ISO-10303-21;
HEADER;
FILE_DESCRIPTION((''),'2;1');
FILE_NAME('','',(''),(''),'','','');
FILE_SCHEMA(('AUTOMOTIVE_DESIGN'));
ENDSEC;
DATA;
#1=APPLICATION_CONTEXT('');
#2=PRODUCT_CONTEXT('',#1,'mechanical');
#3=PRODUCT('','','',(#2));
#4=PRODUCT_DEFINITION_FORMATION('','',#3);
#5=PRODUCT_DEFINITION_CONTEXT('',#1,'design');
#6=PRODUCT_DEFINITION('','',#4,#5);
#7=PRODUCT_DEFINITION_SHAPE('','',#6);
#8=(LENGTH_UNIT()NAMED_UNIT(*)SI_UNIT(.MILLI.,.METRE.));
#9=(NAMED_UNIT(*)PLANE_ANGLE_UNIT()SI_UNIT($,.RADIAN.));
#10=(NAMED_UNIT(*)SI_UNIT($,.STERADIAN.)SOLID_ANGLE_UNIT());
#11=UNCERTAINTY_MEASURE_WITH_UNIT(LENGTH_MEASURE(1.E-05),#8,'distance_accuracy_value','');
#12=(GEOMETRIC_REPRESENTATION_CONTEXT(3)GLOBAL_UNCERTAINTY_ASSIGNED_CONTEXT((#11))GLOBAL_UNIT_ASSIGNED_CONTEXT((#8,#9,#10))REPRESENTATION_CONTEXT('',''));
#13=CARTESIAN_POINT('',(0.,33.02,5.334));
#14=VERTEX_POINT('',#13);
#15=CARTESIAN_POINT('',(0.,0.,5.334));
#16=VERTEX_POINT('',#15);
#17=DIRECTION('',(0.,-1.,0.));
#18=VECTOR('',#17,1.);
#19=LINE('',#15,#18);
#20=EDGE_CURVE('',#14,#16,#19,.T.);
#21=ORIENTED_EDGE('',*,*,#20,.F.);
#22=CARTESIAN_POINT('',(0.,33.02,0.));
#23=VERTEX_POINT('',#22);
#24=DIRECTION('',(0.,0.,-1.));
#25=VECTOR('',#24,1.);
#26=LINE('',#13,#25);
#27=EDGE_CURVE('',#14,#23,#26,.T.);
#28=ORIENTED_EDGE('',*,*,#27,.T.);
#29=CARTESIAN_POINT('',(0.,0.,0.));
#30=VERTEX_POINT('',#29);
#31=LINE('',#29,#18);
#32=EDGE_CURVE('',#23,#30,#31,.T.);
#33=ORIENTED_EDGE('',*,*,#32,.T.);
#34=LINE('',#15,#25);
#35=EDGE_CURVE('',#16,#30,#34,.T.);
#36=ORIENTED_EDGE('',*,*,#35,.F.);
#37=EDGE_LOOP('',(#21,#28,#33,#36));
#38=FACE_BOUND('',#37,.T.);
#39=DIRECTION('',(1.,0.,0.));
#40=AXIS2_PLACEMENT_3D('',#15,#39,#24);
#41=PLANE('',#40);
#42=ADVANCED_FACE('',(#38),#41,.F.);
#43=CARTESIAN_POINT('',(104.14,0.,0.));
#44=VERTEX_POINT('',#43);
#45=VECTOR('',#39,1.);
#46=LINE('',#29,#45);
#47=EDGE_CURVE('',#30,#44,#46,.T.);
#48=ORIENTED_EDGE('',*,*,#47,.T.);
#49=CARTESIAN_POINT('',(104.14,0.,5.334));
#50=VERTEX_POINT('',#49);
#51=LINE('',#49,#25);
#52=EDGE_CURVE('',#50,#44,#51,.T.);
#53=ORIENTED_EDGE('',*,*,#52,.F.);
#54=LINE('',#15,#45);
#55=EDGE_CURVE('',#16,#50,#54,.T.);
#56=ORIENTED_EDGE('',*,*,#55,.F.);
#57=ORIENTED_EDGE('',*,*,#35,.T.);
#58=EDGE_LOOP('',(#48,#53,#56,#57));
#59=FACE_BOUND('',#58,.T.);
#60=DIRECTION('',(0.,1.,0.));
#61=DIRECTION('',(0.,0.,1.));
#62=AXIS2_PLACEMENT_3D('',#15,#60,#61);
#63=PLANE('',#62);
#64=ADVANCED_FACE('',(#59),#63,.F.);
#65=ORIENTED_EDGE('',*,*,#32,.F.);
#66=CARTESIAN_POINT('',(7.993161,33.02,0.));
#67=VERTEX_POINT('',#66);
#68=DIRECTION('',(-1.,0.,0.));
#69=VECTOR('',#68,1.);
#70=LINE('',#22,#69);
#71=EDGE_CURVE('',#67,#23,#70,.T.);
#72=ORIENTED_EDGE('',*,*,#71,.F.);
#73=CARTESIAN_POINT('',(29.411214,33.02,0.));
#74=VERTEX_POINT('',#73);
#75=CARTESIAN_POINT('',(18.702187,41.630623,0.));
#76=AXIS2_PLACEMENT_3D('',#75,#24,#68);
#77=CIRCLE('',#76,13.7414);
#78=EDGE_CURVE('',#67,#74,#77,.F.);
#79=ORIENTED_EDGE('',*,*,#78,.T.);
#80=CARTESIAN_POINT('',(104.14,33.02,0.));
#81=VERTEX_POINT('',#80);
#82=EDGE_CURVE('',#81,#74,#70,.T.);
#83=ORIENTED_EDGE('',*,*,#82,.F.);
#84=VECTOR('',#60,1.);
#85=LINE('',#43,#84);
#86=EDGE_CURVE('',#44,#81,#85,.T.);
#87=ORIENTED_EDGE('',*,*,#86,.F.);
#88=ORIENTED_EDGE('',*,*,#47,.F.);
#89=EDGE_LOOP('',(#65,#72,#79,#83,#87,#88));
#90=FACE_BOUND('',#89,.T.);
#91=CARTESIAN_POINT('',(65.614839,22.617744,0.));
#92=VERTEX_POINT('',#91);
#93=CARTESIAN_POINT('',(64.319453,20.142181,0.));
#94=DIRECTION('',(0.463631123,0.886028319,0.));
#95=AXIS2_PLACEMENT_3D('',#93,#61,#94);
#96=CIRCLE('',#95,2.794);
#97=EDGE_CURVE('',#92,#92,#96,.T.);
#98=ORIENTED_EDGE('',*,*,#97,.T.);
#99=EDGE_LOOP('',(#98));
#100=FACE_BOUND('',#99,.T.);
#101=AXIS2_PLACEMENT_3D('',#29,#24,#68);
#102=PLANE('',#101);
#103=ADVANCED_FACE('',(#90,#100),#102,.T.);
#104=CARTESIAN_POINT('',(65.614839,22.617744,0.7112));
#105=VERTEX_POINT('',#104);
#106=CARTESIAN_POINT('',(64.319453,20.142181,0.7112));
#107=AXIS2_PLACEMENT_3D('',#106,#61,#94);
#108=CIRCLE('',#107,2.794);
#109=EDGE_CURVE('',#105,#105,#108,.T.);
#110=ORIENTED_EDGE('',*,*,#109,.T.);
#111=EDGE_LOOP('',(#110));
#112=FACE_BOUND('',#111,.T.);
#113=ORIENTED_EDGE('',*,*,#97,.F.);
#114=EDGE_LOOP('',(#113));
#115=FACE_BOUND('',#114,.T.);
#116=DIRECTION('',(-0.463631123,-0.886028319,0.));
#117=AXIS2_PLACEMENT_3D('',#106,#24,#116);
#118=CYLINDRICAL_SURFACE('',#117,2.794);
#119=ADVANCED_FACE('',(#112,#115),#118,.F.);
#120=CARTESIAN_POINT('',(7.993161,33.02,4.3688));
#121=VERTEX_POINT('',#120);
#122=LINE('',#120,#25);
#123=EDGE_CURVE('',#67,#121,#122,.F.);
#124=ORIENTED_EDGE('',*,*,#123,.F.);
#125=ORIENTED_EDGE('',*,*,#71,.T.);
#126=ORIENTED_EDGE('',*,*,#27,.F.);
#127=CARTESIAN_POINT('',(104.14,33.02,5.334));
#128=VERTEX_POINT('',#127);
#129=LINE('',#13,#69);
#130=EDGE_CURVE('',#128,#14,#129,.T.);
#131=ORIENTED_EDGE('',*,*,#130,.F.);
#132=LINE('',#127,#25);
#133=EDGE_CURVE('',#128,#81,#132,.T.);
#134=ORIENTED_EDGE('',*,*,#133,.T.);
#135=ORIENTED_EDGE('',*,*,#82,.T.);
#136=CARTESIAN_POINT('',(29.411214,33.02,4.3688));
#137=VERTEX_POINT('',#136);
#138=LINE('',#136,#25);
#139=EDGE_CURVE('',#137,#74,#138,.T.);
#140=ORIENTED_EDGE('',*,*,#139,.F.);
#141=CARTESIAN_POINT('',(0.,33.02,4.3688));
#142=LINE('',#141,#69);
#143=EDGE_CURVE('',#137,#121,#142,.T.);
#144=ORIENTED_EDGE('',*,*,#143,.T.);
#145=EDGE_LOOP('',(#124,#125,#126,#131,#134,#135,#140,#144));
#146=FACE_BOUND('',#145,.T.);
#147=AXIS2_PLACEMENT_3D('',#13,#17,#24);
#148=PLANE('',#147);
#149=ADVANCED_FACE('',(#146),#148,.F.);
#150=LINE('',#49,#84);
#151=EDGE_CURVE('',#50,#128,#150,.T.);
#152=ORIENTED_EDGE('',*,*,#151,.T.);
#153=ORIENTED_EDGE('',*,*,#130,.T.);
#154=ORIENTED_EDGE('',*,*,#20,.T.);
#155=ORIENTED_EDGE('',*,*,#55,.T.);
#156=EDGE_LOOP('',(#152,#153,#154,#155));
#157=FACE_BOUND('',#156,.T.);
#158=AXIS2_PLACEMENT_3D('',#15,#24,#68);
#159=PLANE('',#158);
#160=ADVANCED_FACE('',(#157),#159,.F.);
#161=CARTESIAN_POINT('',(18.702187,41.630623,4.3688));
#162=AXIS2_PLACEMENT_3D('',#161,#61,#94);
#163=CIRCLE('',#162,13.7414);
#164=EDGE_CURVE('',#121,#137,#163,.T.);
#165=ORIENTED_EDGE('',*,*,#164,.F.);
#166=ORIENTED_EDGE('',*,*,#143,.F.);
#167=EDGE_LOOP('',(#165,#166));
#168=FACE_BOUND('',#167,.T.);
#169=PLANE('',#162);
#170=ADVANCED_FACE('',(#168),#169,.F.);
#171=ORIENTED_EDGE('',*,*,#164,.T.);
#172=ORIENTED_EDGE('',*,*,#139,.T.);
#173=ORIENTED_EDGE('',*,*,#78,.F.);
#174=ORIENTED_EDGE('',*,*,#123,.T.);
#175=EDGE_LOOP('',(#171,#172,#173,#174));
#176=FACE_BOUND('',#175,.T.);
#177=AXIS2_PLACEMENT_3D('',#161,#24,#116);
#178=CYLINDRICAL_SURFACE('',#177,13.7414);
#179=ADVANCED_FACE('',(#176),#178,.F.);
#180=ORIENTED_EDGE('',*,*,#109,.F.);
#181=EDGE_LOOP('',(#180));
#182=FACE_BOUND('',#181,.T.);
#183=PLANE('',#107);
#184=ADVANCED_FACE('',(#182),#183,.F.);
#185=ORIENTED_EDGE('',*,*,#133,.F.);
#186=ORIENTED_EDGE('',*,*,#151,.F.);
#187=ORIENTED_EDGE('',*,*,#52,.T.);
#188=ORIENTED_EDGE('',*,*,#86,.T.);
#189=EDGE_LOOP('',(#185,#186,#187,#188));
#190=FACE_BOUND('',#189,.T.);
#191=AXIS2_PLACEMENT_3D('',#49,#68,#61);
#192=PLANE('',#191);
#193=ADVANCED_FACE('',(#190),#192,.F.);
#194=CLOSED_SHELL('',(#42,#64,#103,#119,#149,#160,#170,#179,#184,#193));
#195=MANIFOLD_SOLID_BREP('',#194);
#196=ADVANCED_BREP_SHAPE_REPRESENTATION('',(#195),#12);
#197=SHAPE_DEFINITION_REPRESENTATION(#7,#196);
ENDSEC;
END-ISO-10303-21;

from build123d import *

# Parameters (mm, degrees)
SKETCH1_W           = 104.14
SKETCH1_H           = 33.02
BOSS_EXTRUDE1_DEPTH = 5.334
CAVITY1_DEPTH       = 4.3688
CAVITY1_2_OUTLINE_R = 2.794
CAVITY1_2_DEPTH     = 0.7112


# Read off the part's stored shape, not the designer's step: Cavity1
with BuildPart() as part:
    # Sketch1 → Boss-Extrude1 (new body)
    with BuildSketch(Plane.XY):
        with Locations((52.07, 16.51)):
            Rectangle(SKETCH1_W, SKETCH1_H)
    extrude(amount=BOSS_EXTRUDE1_DEPTH)

    # Cavity1 outline → Cavity1 (cut)
    with BuildSketch(Plane.XY):
        with BuildLine():
            ThreePointArc((7.993160963, 33.02), (18.702187299, 27.889223026), (29.411213634, 33.02))
            Line((29.411213634, 33.02), (7.993160963, 33.02))
        make_face()
    extrude(amount=CAVITY1_DEPTH, mode=Mode.SUBTRACT)

    # Cavity1 2 outline → Cavity1 2 (cut)
    with BuildSketch(Plane.XY):
        with Locations((64.319453414, 20.142181246)):
            Circle(CAVITY1_2_OUTLINE_R)
    extrude(amount=CAVITY1_2_DEPTH, mode=Mode.SUBTRACT)


solid = part.part
